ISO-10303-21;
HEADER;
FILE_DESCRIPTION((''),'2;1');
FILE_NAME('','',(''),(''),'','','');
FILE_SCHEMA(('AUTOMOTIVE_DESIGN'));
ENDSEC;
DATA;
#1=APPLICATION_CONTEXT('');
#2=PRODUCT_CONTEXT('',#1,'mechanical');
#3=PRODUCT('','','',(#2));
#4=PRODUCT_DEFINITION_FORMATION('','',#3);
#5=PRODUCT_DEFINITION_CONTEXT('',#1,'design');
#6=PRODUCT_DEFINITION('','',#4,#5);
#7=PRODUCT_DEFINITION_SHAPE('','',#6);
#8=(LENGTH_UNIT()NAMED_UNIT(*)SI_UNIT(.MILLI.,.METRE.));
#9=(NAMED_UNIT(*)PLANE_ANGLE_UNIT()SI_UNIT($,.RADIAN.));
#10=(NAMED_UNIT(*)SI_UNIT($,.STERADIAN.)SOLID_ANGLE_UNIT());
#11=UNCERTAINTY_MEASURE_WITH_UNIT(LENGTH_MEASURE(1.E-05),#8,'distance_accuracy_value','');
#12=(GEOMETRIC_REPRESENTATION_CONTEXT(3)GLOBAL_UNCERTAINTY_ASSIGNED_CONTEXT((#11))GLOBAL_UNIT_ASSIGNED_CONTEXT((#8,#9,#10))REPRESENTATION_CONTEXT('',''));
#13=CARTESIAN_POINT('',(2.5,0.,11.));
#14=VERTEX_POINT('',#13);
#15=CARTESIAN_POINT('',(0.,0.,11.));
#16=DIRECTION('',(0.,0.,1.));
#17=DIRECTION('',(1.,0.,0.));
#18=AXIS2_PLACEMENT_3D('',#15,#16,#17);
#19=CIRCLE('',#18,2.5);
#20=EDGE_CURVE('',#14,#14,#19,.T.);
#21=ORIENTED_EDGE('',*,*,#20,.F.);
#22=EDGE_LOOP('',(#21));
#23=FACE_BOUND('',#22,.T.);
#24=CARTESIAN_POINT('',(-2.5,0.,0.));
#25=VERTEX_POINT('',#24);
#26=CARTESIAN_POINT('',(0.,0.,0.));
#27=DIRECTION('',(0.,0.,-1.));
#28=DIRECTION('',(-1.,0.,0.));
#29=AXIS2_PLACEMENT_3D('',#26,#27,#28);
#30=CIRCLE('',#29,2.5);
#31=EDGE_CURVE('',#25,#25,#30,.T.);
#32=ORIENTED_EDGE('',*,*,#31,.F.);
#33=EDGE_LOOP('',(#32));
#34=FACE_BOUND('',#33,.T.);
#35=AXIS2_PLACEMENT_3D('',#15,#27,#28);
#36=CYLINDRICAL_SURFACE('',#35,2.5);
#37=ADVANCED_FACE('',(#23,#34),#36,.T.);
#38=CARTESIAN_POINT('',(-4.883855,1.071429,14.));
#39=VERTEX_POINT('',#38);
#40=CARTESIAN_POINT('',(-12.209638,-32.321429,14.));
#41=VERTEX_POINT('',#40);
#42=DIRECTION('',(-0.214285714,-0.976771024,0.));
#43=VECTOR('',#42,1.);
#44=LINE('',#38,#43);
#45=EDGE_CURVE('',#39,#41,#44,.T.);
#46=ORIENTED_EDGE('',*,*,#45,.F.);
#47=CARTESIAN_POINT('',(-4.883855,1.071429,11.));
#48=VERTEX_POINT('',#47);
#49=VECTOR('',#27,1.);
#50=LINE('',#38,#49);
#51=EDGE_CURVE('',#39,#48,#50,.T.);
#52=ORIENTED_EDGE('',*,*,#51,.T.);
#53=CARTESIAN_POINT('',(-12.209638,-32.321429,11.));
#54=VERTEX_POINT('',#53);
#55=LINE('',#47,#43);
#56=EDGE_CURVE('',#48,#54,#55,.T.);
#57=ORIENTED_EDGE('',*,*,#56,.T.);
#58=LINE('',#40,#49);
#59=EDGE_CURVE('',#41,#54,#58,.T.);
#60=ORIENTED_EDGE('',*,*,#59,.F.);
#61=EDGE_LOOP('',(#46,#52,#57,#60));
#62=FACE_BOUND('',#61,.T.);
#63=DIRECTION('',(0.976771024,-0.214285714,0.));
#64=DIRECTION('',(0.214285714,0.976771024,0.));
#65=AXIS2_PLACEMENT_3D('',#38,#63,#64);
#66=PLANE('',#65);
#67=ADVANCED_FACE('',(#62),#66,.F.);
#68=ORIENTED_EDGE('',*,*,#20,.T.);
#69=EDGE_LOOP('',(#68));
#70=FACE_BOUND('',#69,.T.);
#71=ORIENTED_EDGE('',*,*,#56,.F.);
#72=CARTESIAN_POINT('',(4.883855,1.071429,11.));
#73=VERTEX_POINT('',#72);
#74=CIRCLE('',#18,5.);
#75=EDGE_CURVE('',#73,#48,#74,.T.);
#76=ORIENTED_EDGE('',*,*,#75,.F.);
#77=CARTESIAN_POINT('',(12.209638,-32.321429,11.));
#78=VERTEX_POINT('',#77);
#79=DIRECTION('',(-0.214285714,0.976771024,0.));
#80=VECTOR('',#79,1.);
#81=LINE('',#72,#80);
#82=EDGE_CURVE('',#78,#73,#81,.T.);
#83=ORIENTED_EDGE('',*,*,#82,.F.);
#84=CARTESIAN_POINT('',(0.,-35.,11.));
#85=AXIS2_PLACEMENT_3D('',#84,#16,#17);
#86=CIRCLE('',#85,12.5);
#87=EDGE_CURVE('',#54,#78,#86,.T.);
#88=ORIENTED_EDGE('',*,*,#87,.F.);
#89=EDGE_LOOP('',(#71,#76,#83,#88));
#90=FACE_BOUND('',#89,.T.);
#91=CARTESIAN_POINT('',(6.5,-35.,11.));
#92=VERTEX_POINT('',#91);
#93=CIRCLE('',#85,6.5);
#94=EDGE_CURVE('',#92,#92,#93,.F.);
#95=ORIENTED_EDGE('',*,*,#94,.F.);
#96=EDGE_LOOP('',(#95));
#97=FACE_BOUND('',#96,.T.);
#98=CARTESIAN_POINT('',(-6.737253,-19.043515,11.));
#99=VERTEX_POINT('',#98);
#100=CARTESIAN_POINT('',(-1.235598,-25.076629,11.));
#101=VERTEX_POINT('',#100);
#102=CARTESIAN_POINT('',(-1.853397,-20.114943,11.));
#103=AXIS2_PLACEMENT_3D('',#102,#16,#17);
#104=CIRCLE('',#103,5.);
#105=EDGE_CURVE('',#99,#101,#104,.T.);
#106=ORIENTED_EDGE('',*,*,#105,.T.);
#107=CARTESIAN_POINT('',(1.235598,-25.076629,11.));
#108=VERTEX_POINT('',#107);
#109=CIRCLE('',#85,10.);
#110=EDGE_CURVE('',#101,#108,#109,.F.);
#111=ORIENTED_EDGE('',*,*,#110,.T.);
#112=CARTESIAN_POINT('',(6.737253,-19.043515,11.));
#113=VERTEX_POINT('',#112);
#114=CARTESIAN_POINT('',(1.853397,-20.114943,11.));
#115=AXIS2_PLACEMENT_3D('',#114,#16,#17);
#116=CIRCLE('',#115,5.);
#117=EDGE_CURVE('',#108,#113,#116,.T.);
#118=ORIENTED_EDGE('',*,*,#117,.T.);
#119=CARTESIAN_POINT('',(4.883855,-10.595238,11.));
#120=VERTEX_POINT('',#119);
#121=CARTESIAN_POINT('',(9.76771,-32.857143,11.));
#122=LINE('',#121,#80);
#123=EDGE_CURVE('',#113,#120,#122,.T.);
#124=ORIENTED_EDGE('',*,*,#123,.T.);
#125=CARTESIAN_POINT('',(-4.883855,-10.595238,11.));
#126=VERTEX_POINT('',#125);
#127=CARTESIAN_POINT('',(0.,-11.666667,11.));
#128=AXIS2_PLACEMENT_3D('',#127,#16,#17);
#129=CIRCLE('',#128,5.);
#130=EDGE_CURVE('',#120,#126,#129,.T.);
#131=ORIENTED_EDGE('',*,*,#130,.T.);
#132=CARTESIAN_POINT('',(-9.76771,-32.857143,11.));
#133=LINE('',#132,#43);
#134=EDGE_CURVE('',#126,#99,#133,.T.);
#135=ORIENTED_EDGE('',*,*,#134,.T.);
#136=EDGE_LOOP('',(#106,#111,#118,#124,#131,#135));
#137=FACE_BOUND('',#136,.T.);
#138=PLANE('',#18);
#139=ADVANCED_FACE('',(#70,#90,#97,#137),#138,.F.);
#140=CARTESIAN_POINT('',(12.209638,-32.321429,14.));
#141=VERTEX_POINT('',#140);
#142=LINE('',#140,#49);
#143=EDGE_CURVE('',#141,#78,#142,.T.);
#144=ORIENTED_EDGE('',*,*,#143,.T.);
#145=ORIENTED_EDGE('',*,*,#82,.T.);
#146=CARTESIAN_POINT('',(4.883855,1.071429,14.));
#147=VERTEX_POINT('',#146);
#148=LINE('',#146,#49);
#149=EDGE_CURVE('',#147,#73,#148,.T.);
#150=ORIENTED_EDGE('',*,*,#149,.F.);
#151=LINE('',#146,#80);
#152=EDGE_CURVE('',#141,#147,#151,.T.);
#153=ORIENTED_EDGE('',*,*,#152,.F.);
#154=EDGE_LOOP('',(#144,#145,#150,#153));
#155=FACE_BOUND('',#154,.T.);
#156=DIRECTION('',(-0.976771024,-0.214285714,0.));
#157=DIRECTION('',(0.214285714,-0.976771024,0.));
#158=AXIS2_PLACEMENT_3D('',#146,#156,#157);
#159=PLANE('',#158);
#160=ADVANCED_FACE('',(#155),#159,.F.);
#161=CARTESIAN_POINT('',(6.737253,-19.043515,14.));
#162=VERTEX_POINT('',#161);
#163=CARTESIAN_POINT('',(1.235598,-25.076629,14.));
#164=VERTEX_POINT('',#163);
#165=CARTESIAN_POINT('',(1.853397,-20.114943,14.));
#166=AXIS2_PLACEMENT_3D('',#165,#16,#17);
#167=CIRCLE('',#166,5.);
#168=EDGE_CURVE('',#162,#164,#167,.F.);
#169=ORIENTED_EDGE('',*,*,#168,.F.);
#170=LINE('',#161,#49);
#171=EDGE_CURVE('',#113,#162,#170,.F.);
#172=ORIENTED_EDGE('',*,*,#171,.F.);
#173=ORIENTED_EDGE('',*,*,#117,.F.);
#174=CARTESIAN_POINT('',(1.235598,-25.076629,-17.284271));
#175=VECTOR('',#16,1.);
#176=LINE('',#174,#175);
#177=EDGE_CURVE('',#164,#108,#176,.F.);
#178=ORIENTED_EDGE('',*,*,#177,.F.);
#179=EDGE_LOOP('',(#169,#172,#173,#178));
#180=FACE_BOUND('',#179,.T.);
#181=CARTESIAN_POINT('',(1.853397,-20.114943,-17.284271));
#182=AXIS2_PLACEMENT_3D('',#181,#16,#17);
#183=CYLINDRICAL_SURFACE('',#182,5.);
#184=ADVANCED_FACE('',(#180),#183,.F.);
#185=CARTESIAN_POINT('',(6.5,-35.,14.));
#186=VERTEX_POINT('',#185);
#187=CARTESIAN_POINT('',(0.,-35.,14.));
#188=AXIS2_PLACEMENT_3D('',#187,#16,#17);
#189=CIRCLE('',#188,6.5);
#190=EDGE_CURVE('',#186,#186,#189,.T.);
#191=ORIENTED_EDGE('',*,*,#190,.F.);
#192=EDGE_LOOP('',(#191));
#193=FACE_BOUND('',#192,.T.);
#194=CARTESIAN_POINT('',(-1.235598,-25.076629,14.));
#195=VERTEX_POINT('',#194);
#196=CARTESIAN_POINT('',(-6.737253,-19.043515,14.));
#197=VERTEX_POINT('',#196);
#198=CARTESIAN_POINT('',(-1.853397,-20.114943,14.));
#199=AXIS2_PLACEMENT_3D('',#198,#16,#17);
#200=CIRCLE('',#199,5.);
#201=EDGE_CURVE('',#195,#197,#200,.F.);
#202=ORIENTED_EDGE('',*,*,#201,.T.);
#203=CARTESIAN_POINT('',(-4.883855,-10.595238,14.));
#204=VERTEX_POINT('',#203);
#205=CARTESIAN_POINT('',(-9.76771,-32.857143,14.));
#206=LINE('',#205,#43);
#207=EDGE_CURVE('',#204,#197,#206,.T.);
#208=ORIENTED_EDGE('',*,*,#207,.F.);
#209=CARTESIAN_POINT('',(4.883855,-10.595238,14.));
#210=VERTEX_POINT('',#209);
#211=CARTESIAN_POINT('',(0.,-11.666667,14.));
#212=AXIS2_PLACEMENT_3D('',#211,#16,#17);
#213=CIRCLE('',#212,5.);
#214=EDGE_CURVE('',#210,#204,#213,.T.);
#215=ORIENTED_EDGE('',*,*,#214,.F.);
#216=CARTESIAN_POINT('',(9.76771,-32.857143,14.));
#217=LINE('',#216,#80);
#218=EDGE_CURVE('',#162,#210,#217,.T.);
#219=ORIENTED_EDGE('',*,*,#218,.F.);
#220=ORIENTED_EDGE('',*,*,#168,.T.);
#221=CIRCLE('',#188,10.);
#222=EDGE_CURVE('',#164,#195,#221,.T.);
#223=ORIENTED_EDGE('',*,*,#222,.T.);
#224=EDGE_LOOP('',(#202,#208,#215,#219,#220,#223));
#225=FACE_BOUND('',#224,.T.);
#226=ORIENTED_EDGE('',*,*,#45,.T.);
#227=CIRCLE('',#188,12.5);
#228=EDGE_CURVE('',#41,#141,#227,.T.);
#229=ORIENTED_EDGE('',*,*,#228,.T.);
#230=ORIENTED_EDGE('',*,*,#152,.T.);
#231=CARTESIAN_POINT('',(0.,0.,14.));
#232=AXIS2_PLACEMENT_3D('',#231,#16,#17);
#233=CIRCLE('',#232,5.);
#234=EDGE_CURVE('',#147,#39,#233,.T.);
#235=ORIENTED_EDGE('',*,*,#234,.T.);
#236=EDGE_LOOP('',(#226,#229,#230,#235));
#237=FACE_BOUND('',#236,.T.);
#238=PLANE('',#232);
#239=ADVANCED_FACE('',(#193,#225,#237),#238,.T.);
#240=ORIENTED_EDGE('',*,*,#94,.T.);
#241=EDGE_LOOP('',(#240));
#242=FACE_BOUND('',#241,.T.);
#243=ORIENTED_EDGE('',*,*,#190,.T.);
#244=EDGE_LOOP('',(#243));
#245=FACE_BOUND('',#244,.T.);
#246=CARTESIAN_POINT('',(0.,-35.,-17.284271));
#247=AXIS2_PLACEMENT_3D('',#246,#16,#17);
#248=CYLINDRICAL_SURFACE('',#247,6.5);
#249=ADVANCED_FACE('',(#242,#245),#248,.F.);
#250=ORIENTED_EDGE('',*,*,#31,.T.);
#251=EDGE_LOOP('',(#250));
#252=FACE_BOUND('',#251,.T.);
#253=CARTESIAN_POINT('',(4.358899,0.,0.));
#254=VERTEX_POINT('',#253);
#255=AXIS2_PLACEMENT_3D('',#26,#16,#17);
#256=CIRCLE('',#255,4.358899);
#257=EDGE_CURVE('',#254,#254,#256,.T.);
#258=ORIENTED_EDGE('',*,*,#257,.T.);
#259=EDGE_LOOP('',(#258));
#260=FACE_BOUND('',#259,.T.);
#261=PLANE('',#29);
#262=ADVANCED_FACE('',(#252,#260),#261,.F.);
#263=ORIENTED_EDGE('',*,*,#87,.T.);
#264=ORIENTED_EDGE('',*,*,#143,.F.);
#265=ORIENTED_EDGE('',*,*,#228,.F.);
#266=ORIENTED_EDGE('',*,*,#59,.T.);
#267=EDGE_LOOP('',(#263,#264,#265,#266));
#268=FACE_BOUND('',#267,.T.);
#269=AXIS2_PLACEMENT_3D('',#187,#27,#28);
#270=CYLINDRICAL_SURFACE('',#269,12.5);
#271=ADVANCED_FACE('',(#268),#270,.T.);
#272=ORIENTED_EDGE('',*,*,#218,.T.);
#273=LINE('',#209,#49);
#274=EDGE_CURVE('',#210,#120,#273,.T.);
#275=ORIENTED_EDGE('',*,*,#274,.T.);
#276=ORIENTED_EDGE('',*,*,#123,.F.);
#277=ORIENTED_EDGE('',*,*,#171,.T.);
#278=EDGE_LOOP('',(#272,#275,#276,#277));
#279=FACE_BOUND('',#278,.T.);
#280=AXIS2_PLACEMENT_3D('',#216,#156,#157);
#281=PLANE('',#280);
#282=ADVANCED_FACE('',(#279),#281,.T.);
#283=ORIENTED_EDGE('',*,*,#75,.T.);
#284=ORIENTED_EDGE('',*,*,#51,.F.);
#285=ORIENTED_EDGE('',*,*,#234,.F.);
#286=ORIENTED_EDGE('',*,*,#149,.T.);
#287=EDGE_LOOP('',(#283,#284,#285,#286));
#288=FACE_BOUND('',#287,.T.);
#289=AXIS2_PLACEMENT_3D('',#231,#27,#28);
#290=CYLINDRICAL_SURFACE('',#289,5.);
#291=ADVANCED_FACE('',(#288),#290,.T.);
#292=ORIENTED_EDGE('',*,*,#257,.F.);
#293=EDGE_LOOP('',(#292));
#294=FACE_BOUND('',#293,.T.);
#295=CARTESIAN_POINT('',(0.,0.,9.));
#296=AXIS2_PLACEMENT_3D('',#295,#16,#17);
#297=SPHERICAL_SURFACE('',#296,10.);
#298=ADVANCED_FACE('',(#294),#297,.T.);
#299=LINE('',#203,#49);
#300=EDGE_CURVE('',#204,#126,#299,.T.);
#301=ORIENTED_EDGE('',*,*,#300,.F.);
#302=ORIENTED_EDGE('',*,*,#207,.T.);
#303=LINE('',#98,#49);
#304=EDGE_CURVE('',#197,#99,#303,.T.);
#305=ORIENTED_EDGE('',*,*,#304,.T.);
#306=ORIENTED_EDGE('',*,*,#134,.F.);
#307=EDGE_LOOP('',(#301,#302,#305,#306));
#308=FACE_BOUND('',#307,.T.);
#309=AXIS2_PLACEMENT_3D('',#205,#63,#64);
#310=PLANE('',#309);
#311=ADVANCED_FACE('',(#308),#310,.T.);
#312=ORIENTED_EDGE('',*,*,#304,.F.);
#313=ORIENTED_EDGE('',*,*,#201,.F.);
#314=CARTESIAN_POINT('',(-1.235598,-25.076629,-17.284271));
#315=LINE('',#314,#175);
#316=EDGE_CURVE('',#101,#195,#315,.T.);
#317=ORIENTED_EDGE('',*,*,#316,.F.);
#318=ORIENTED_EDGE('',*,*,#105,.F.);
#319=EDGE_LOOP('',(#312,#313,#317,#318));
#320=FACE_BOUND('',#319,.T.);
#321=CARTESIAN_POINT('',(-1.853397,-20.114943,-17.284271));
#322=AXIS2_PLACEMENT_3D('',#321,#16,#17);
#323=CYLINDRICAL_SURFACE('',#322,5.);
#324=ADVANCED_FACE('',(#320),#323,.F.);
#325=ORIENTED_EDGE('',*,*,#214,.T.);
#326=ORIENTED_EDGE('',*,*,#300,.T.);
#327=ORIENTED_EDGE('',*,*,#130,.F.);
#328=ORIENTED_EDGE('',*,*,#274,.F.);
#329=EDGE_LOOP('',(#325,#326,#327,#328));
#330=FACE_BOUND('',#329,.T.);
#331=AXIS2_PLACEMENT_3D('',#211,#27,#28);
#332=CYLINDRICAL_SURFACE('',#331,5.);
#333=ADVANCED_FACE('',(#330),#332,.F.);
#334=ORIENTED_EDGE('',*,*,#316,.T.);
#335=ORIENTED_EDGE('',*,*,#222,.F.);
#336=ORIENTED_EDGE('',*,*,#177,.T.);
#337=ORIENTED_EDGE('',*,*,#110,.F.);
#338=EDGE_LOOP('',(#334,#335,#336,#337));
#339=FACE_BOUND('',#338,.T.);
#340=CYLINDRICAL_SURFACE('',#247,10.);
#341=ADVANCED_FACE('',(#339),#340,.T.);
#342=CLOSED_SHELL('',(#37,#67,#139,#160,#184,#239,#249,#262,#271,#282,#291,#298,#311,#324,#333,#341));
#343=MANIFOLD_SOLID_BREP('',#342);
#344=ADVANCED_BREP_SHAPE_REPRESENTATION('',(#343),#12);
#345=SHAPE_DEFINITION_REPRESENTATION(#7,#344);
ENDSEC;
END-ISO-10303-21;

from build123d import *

# Parameters (mm, degrees)
SKETCH_1_R      = 2.5
EXTRUDE_1_DEPTH = 11
EXTRUDE_2_DEPTH = 3
EXTRUDE_START   = -3
SKETCH_4_R      = 10
SKETCH_4_R_2    = 6.5
EXTRUDE_3_DEPTH = 3
FILLET_START    = 11
FILLET_1_DEPTH  = 3


with BuildPart() as part:
    # 草图1 → 凸台-拉伸1 (new body)
    with BuildSketch(Plane.XY):
        Circle(SKETCH_1_R)
    extrude(amount=EXTRUDE_1_DEPTH)

    # 草图2 → 旋转1 (revolve)
    with BuildSketch(Plane(origin=(0, 0, 0), x_dir=(1, 0, 0), z_dir=(0, 1, 0))):
        with BuildLine():
            Line((0, 0), (-4.358898944, 0))
            ThreePointArc((-4.358898944, 0), (-2.236067977, 0.746794345), (0, 1))
            Line((0, 1), (0, 0))
        make_face()
    revolve(axis=Axis((0, 0, 0), (0, 0, -1)))

    # 草图3 → 凸台-拉伸2 (add)
    with BuildSketch(Plane.XY.offset(11)):
        with BuildLine():
            Line((-4.883855118, 1.071428571), (-12.209637796, -32.321428571))
            ThreePointArc((-12.209637796, -32.321428571), (0, -47.5), (12.209637796, -32.321428571))
            Line((12.209637796, -32.321428571), (4.883855118, 1.071428571))
            ThreePointArc((4.883855118, 1.071428571), (0, 5), (-4.883855118, 1.071428571))
        make_face()
        with BuildLine():
            Line((-9.767710237, -32.857142857), (-4.883855118, -10.595238095))
            ThreePointArc((-4.883855118, -10.595238095), (0, -6.666666667), (4.883855118, -10.595238095))
            Line((4.883855118, -10.595238095), (9.767710237, -32.857142857))
            ThreePointArc((9.767710237, -32.857142857), (0, -45), (-9.767710237, -32.857142857))
        make_face(mode=Mode.SUBTRACT)
    extrude(amount=EXTRUDE_2_DEPTH)

    # 草图4 → 凸台-拉伸3 (add)
    with BuildSketch(Plane.XY.offset(14).offset(EXTRUDE_START)):
        with Locations((0, -35)):
            Circle(SKETCH_4_R)
        with Locations((0, -35)):
            Circle(SKETCH_4_R_2, mode=Mode.SUBTRACT)
    extrude(amount=EXTRUDE_3_DEPTH)

    # 圆角1: read off the stored shape, not the designer's step
    # 圆角1 outline → 圆角1 (add)
    with BuildSketch(Plane.XY.offset(FILLET_START)):
        with BuildLine():
            ThreePointArc((6.737252603, -19.043514567), (5.547910317, -23.48400457), (1.235598323, -25.076628759))
            ThreePointArc((1.235598323, -25.076628759), (6.738122863, -27.610974335), (9.767710237, -32.857142857))
            Line((9.767710237, -32.857142857), (6.737252603, -19.043514567))
        make_face()
        with BuildLine():
            ThreePointArc((-9.767710237, -32.857142857), (-6.738122863, -27.610974335), (-1.235598323, -25.076628759))
            ThreePointArc((-1.235598323, -25.076628759), (-5.547910317, -23.48400457), (-6.737252603, -19.043514567))
            Line((-6.737252603, -19.043514567), (-9.767710237, -32.857142857))
        make_face()
    extrude(amount=FILLET_1_DEPTH)


solid = part.part
